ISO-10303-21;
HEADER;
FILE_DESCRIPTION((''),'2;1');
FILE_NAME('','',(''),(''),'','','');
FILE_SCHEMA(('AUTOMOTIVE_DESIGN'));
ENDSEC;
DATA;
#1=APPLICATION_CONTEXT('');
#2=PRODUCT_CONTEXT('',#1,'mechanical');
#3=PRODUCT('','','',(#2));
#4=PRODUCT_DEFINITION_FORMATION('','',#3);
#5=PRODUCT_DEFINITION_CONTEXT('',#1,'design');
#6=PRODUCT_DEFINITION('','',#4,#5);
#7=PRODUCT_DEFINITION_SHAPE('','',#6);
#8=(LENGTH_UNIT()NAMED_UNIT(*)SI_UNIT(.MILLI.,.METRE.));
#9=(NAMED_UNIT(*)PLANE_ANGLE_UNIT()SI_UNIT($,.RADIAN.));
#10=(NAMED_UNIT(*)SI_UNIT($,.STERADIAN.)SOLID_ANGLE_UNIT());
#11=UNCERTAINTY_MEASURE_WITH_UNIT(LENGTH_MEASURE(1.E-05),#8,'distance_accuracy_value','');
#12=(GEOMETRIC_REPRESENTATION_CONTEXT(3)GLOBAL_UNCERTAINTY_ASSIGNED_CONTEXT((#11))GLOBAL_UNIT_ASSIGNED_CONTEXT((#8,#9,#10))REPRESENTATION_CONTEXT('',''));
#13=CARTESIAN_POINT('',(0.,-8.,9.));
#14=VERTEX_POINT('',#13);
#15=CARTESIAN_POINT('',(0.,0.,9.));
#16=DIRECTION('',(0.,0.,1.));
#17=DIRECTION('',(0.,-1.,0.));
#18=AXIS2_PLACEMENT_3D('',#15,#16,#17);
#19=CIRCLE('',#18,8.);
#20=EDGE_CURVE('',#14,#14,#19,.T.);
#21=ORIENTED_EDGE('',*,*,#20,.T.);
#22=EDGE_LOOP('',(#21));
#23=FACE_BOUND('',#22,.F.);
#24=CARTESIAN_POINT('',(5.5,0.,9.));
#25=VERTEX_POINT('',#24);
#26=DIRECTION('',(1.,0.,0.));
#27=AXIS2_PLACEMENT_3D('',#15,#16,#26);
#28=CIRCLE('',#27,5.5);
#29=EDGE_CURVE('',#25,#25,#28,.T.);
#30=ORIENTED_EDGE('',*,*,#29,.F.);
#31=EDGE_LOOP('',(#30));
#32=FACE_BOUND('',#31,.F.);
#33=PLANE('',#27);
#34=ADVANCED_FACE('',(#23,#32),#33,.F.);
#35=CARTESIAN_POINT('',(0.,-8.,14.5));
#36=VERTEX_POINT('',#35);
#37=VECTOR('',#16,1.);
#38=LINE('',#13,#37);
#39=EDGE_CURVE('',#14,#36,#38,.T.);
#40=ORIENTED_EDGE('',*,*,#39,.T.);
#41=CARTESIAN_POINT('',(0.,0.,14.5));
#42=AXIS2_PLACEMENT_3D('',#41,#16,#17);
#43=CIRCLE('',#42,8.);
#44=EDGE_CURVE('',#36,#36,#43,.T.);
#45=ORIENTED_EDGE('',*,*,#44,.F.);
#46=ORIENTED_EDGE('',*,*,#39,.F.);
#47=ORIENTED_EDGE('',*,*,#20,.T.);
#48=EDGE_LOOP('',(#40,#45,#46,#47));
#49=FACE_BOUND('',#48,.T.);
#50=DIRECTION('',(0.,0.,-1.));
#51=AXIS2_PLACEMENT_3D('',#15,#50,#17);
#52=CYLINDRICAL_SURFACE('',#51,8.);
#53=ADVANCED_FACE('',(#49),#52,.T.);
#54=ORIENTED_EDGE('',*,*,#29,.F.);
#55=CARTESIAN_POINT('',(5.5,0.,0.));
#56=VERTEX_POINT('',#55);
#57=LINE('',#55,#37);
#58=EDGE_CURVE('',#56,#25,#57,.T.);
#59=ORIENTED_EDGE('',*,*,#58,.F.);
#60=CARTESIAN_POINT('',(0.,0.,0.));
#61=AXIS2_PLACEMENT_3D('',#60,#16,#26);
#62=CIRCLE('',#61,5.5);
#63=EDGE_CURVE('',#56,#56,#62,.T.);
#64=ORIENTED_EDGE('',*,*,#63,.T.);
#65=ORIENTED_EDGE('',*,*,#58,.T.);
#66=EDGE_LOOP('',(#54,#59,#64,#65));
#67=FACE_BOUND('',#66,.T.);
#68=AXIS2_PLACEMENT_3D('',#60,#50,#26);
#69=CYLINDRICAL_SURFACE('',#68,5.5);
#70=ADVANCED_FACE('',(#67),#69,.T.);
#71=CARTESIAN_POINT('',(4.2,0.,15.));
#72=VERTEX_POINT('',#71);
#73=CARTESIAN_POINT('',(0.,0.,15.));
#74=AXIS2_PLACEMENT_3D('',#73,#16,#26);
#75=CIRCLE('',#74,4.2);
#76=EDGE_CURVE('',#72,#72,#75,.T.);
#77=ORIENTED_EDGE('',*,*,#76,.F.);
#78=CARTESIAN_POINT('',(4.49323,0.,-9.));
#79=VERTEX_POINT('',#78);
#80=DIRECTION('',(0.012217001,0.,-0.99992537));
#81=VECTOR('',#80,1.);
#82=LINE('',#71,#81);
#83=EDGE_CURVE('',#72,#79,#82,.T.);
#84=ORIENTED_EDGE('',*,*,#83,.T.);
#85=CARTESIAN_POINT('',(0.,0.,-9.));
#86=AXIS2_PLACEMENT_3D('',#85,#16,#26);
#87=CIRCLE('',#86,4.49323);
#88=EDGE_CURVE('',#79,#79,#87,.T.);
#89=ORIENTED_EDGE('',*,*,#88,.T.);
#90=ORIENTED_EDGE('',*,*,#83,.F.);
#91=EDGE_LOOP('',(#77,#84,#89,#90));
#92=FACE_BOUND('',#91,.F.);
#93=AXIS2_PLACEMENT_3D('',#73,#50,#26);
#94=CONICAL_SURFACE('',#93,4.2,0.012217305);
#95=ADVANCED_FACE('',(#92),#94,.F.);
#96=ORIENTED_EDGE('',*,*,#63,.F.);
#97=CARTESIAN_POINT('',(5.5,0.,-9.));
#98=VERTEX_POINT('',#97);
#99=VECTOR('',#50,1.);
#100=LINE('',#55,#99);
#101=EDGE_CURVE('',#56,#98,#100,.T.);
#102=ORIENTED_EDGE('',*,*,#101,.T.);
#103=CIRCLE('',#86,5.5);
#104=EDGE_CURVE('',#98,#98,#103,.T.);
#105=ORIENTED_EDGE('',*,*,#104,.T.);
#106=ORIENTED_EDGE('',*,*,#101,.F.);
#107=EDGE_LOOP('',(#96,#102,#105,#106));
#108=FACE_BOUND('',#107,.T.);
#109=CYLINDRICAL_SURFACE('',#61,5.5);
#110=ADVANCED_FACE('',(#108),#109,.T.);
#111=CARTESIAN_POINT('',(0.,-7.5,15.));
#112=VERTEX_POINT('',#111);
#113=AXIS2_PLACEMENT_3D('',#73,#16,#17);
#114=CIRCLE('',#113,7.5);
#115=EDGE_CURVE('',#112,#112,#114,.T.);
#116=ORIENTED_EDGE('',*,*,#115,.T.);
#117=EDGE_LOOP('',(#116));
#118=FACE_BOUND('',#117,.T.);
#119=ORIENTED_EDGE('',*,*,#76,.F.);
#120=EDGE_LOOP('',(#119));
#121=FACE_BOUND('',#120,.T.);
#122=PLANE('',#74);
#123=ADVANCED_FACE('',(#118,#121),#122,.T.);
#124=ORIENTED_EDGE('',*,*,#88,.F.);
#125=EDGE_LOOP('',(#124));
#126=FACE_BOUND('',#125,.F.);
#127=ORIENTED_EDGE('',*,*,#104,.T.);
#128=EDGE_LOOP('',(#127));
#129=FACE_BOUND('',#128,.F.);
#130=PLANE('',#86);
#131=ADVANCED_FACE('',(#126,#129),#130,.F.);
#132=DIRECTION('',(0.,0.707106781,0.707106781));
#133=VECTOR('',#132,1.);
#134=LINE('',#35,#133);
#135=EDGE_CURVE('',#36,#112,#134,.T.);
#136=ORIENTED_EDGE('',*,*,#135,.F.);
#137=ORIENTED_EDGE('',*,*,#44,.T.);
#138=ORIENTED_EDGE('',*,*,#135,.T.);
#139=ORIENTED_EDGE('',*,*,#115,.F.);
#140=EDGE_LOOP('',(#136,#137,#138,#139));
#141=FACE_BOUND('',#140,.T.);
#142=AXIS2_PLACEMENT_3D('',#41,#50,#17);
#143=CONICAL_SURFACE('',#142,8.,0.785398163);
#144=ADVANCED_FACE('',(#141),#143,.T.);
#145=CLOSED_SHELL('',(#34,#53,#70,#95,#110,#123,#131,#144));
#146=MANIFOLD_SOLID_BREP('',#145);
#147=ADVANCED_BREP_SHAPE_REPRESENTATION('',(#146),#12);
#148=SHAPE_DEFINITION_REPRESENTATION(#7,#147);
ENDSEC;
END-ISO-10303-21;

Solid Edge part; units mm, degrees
sketch "Sketch1" plane through (0, 0, 0) normal (0, 0, 1) x (1, 0, 0)
  circle A0 centre (0, 0) radius 5.5
extrude "Ajout_matière_1" add sketch "Sketch1" along normal mid plane 18
sketch "Sketch2" plane through (0, 0, 9) normal (0, 0, 1) x (0, -1, 0)
  circle A0 centre (0, 0) radius 8
extrude "Ajout_matière_3" add sketch "Sketch2" along normal blind 6
sketch "Sketch3" plane through (0, 0, 15) normal (0, 0, 1) x (1, 0, 0)
  circle A0 centre (0, 0) radius 4.2
  dimension "D1" = 8.4
extrude "Cutout1" cut sketch "Sketch3" against normal up to next and the other way up to next
draft "Dépouille_4" angle 0.7 neutral plane through (0, 0, 15) normal (0, 0, 1) pull direction (0, 0, -1) face at (2.3242, 3.4983, -4.76)
chamfer "Chanfrein_2" distance 0.5 angle 45 1 edges at (0, 8, 15)
properties material "Plastique ABS, haute performance"
